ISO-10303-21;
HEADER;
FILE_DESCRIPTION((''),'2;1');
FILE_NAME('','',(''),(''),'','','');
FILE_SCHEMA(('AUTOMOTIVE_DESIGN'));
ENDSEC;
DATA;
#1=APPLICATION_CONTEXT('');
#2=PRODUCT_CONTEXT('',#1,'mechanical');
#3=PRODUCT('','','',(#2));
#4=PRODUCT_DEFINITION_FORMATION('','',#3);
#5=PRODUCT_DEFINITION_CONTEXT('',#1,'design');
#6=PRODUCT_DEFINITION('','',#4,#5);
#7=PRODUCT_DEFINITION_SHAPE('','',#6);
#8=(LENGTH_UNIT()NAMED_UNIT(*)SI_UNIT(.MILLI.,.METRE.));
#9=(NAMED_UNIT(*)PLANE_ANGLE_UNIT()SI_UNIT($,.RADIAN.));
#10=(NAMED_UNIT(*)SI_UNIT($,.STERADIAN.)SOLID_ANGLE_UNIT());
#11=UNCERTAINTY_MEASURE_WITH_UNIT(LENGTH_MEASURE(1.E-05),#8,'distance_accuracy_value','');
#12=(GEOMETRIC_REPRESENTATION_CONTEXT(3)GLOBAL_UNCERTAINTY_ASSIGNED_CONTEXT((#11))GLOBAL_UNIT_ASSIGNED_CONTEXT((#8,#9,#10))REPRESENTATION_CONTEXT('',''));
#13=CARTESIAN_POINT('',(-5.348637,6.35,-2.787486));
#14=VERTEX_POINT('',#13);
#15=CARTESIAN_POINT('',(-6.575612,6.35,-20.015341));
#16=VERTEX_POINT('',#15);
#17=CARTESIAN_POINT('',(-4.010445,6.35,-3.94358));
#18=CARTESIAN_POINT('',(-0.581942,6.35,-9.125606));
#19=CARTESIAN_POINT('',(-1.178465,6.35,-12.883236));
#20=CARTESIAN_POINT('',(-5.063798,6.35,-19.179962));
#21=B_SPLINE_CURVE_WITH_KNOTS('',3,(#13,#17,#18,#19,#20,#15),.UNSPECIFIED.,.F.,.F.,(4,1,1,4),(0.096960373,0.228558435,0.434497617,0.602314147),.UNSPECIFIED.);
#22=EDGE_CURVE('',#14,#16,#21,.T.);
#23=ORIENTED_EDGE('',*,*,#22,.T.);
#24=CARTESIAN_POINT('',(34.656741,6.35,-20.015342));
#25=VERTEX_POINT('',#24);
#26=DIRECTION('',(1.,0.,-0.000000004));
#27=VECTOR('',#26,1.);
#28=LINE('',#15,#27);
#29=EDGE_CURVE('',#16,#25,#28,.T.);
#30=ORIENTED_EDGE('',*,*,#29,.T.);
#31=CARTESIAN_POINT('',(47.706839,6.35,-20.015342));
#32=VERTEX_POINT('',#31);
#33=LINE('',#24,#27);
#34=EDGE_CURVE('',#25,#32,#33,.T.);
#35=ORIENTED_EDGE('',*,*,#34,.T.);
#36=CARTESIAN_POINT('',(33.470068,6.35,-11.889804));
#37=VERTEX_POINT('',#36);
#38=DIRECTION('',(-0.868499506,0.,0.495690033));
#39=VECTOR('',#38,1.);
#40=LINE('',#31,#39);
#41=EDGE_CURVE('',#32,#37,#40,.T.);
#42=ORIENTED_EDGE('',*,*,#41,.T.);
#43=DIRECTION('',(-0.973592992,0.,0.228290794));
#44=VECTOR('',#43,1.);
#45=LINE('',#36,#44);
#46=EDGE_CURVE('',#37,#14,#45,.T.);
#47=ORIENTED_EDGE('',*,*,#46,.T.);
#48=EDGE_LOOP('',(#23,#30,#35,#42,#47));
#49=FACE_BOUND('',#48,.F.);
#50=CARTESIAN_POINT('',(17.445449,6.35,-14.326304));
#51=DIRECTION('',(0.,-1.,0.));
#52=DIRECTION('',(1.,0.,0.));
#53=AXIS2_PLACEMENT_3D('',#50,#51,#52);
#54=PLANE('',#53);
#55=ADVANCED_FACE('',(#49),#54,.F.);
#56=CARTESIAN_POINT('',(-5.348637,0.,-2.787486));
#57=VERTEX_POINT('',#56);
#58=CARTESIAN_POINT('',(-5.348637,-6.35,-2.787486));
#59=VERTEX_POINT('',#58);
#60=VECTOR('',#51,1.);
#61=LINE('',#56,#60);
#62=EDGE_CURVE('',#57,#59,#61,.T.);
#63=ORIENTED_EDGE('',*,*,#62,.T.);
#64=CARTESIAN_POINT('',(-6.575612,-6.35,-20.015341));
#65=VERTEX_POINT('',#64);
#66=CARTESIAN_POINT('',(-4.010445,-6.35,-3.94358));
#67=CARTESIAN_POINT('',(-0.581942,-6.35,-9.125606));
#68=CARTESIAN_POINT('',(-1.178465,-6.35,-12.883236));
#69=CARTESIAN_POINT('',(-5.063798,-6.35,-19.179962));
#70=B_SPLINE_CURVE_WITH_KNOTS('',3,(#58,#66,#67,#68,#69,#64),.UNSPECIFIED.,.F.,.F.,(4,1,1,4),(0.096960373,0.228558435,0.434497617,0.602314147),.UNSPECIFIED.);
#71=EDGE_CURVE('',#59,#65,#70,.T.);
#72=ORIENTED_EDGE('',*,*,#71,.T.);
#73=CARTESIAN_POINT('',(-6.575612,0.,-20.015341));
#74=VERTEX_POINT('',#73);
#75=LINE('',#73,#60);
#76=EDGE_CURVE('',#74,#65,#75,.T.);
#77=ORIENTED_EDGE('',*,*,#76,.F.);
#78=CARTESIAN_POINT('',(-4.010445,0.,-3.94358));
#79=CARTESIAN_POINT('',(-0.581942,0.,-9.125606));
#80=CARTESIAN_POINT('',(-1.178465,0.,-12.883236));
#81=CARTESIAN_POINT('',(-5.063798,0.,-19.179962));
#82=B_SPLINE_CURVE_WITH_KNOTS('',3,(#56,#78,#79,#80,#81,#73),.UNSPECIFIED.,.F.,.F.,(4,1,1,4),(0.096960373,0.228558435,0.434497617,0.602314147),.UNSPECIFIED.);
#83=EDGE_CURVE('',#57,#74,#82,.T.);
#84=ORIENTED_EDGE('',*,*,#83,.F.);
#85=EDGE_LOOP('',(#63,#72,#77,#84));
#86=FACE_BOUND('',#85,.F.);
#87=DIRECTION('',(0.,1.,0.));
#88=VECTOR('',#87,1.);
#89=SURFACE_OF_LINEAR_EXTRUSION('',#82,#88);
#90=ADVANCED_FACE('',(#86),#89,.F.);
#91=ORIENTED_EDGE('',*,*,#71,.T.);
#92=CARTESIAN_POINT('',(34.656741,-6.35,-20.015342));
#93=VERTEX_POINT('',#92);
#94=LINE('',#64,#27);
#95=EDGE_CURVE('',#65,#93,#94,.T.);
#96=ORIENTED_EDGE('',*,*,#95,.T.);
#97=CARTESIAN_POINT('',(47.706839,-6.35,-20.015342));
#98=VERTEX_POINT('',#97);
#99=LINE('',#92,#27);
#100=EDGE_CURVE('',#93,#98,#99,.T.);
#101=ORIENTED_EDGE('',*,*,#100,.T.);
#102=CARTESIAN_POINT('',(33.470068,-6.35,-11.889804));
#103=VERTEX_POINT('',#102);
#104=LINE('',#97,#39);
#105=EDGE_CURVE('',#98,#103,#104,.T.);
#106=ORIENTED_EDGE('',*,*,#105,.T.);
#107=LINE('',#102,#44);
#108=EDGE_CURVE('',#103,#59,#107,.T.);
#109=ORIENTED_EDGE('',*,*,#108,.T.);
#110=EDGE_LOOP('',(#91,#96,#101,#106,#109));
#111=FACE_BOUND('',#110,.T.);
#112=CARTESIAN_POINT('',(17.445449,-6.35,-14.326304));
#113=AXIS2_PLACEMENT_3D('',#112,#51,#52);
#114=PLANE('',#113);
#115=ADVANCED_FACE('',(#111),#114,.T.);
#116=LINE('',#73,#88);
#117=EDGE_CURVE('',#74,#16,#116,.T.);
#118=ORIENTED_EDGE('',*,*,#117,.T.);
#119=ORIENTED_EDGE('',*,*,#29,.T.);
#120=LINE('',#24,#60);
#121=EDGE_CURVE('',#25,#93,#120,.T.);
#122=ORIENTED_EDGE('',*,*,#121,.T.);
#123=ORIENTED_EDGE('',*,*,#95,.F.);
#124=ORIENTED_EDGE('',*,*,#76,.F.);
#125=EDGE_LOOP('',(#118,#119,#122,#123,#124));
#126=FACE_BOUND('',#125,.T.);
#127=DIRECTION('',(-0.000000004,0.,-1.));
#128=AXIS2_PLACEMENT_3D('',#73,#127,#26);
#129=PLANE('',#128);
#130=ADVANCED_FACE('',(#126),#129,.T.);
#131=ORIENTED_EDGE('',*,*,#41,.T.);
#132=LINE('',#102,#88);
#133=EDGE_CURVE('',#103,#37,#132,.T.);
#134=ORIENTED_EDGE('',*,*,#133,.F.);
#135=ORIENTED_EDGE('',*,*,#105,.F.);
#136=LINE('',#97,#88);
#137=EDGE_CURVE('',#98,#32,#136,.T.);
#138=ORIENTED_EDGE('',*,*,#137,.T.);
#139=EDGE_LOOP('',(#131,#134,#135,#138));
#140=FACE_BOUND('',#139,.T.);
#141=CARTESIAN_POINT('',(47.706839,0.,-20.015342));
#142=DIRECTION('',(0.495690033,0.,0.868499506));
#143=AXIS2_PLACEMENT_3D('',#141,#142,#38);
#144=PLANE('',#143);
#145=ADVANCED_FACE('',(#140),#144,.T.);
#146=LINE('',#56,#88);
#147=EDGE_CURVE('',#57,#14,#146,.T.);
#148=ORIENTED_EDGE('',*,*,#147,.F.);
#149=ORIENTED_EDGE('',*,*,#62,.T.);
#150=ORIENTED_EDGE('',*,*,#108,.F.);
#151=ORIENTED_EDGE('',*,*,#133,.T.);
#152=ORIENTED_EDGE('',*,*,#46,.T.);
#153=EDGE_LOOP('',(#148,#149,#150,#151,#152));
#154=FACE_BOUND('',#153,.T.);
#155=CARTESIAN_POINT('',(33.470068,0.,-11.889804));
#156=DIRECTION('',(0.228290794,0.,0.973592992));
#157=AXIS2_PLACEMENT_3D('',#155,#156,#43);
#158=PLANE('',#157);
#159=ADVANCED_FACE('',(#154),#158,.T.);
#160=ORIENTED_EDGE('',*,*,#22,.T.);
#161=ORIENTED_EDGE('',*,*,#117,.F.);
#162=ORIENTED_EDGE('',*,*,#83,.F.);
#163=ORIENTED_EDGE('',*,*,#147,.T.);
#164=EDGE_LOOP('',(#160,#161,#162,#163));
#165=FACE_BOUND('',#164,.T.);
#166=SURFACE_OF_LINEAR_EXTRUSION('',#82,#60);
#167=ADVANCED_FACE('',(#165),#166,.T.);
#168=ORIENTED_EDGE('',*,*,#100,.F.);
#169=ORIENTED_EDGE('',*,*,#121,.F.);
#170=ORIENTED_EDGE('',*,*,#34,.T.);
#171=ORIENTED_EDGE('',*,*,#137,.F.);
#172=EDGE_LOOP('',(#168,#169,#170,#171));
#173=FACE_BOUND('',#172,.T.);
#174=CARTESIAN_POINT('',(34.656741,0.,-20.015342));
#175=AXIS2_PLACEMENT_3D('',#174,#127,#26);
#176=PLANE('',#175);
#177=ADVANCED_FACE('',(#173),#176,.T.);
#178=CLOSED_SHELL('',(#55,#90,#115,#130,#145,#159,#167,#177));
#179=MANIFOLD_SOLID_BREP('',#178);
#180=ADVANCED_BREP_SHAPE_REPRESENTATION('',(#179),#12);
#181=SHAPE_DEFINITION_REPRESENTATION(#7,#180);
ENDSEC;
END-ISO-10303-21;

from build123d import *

# Parameters (mm, degrees)
F1_DEPTH = 6.35


with BuildPart() as f1:
    # F0 (on Front) → F1 (new body, symmetric)
    with BuildSketch(Plane.XZ):
        with BuildLine():
            add(Edge.make_bspline(
                [(-5.3486366817, -2.7874862403), (-4.0104451202, -3.9435804676), (-0.5819417824, -9.125605789), (-1.1784647642, -12.8832361111), (-5.0637980722, -19.1799623301), (-6.5756122832, -20.0153414606)],
                knots=[0.0969603728, 0.0969603728, 0.0969603728, 0.0969603728, 0.2285584347, 0.4344976174, 0.602314147, 0.602314147, 0.602314147, 0.602314147], degree=3))
            Line((-6.5756122832, -20.0153414606), (34.656740726, -20.0153416228))
            Line((34.656740726, -20.0153416228), (47.7068386995, -20.0153416742))
            Line((47.7068386995, -20.0153416742), (33.4700680664, -11.8898041731))
            Line((33.4700680664, -11.8898041731), (-5.3486366817, -2.7874862403))
        make_face()
    extrude(amount=F1_DEPTH, both=True)


solid = f1.part
